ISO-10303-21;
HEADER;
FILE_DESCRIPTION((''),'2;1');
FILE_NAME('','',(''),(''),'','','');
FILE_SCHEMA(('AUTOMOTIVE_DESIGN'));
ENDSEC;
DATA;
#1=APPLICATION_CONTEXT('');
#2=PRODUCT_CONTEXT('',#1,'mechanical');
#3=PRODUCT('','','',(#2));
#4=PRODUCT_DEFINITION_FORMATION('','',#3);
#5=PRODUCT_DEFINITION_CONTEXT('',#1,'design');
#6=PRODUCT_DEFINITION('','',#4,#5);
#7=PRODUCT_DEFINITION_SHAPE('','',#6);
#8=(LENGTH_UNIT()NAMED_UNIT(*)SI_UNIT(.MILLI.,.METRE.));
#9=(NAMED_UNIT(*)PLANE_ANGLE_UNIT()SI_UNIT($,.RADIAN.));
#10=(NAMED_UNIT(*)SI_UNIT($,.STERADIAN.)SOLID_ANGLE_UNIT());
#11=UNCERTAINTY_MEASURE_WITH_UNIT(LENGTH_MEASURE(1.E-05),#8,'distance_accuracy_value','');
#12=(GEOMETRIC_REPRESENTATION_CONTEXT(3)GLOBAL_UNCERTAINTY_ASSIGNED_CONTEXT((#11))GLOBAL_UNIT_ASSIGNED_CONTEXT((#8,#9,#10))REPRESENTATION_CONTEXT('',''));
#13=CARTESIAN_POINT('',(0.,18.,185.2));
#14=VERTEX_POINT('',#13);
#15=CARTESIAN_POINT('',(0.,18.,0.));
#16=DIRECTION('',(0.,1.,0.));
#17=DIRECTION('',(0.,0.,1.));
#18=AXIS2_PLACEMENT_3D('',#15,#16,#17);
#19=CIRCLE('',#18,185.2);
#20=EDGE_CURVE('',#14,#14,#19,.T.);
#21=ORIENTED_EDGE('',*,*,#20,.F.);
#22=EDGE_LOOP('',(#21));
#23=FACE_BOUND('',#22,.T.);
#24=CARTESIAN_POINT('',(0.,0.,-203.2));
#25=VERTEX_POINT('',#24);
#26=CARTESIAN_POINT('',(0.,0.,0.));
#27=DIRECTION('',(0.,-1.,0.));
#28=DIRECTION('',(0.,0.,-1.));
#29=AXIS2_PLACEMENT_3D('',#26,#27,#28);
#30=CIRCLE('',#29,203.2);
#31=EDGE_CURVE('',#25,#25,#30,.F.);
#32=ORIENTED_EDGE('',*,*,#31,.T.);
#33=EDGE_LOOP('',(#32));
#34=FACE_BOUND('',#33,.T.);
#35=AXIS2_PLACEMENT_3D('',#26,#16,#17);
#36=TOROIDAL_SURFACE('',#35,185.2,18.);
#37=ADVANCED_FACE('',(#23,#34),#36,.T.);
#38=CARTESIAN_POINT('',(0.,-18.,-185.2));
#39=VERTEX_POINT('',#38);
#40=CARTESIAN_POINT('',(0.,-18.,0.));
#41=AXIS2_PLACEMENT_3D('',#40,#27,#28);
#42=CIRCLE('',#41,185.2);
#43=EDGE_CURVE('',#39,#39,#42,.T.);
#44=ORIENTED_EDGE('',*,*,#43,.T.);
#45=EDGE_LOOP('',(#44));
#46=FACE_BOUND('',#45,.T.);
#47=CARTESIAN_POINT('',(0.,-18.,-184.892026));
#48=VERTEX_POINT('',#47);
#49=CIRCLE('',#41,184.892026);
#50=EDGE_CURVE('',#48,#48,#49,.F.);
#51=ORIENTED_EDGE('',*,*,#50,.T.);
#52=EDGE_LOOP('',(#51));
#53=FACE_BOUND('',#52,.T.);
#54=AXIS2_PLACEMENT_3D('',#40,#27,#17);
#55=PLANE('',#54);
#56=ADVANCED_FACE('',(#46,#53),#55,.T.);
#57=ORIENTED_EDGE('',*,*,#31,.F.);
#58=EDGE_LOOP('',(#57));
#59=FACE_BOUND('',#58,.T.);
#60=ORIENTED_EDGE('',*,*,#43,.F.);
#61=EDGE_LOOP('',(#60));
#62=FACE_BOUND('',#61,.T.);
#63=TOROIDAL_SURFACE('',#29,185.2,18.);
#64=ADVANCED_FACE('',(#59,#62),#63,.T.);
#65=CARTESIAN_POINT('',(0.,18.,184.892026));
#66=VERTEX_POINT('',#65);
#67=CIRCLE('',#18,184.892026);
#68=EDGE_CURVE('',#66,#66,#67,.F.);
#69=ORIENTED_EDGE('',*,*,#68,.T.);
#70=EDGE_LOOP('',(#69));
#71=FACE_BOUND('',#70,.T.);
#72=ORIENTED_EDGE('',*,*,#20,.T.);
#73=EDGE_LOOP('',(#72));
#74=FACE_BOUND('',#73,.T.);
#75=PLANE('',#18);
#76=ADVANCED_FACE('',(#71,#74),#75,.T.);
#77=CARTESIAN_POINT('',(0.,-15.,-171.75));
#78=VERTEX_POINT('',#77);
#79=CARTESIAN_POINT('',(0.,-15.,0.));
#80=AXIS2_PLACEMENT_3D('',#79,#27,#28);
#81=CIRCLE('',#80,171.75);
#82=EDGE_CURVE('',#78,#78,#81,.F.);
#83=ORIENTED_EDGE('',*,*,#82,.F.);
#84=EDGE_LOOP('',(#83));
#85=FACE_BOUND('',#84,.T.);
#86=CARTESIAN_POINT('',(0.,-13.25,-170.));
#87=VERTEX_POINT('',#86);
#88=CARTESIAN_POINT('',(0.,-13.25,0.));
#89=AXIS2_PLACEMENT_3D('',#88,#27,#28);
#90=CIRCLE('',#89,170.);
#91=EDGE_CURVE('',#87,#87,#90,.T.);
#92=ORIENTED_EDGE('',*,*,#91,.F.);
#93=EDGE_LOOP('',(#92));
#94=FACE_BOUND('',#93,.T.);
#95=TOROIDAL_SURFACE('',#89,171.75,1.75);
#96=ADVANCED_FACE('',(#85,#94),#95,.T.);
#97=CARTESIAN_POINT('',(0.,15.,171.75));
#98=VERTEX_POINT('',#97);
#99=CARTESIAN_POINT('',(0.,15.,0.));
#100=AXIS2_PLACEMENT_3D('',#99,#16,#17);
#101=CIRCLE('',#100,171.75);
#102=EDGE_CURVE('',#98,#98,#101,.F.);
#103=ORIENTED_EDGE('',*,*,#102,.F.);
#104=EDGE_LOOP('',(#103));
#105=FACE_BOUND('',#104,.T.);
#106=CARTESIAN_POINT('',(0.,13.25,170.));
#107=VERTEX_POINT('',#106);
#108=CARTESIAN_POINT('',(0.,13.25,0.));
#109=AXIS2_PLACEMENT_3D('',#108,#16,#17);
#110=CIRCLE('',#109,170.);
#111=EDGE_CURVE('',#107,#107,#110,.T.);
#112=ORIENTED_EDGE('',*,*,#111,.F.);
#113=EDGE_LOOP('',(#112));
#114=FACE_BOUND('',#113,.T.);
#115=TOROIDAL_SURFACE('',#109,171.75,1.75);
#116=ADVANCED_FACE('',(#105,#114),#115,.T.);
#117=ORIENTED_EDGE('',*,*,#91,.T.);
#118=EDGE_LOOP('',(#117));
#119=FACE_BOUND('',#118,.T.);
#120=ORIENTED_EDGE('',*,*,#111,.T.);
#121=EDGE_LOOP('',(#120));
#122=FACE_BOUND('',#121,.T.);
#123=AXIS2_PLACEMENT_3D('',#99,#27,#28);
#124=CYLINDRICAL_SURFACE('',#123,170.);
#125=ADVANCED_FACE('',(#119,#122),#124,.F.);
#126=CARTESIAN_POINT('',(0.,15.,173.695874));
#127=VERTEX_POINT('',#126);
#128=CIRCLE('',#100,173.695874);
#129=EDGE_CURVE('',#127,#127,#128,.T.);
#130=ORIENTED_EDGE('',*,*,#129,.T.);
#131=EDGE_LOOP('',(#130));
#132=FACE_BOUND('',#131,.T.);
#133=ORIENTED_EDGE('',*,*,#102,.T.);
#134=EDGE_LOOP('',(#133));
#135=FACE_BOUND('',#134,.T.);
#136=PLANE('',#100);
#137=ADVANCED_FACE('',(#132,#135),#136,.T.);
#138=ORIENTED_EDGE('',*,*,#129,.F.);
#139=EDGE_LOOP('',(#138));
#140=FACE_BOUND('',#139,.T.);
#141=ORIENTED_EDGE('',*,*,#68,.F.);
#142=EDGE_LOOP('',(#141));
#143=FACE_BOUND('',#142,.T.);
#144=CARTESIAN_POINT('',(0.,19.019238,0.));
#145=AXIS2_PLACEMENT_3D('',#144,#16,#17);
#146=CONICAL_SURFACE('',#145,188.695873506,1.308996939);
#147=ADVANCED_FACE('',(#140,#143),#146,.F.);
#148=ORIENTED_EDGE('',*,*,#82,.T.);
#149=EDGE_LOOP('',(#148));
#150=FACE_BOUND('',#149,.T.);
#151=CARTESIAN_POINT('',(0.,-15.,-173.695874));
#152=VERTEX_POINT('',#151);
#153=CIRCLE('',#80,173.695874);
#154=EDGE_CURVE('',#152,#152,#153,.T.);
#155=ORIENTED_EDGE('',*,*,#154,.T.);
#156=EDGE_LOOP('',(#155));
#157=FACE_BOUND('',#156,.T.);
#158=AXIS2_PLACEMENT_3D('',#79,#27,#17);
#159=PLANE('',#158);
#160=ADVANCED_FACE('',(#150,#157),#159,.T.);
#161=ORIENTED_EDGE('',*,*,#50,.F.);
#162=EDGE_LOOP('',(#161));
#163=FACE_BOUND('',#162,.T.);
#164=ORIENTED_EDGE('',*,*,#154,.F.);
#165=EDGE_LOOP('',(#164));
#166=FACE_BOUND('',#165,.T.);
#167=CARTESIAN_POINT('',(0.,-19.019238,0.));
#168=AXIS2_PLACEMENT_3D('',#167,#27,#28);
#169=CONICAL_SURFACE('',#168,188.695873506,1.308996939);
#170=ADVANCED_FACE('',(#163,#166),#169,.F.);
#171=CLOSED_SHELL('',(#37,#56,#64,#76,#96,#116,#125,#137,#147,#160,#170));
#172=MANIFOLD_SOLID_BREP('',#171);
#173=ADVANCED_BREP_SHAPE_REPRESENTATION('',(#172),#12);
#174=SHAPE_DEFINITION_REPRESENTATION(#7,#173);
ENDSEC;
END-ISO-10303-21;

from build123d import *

# Parameters (mm, degrees)
SKETCH_1_R       = 188.695873506
SKETCH_1_R_2     = 170
EXTRUDE_4_DEPTH  = 15
SKETCH_1_8_R     = 203.2
SKETCH_1_8_R_2   = 188.695873506
EXTRUDE_5_DEPTH  = 18
CHAMFER_1_SIZE   = 15
CHAMFER_1_SIZE_2 = 4.019237886
FILLET_1_R       = 18
FILLET_2_R       = 1.75


# Some blends are built 0.0001 mm under size
with BuildPart() as part:
    # ｽｹｯﾁ1 → ﾎﾞｽ - 押し出し4 (new body)
    with BuildSketch(Plane(origin=(0, 0, 0), x_dir=(1, 0, 0), z_dir=(0, 1, 0))):
        with Locations(Location((0, 0, 0), (0, 0, 270))):
            Circle(SKETCH_1_R)
        with Locations(Location((0, 0, 0), (0, 0, 270))):
            Circle(SKETCH_1_R_2, mode=Mode.SUBTRACT)
    extrude_4 = extrude(amount=EXTRUDE_4_DEPTH)

    # ｽｹｯﾁ1<8> → ﾎﾞｽ - 押し出し5 (add)
    with BuildSketch(Plane(origin=(0, 0, 0), x_dir=(1, 0, 0), z_dir=(0, 1, 0))):
        with Locations(Location((0, 0, 0), (0, 0, 270))):
            Circle(SKETCH_1_8_R)
        with Locations(Location((0, 0, 0), (0, 0, 270))):
            Circle(SKETCH_1_8_R_2, mode=Mode.SUBTRACT)
    extrude_5 = extrude(amount=EXTRUDE_5_DEPTH)

    # ﾐﾗｰ1: ﾎﾞｽ - 押し出し4, ﾎﾞｽ - 押し出し5 across plane
    add(extrude_4.mirror(Plane.ZX))
    add(extrude_5.mirror(Plane.ZX))

    # 面取り1
    # the kernel refuses this chamfer: 15, 4.019237886 mm, written as the material it adds along each edge
    with BuildSketch(Plane(origin=(0, -15, 0), x_dir=(0, 0, 1), z_dir=(-1, 0, 0))) as chamfer_1_piece_1_section:
        Polygon((188.695873506 - CHAMFER_1_SIZE, 0), (188.695873506, -CHAMFER_1_SIZE_2), (188.695873506, 0), align=None)
    chamfer_1_piece_1 = revolve(axis=Axis((0, -15, 0), (0, 1, 0)), mode=Mode.PRIVATE)
    chamfer_1_piece_1 = split(chamfer_1_piece_1, bisect_by=Plane(origin=(0, -18, -179.092170597), z_dir=(0, 1, 0)), keep=Keep.TOP, mode=Mode.PRIVATE)
    add(chamfer_1_piece_1)
    with BuildSketch(Plane(origin=(0, 15, 0), x_dir=(0, 0, 1), z_dir=(-1, 0, 0))) as chamfer_1_piece_2_section:
        Polygon((188.695873506 - CHAMFER_1_SIZE, 0), (188.695873506, CHAMFER_1_SIZE_2), (188.695873506, 0), align=None)
    chamfer_1_piece_2 = revolve(axis=Axis((0, 15, 0), (0, 1, 0)), mode=Mode.PRIVATE)
    chamfer_1_piece_2 = split(chamfer_1_piece_2, bisect_by=Plane(origin=(0, 18, -179.092170597), z_dir=(0, -1, 0)), keep=Keep.TOP, mode=Mode.PRIVATE)
    add(chamfer_1_piece_2)

    # ﾌｨﾚｯﾄ1
    fillet_1_edges = [part.edges().sort_by_distance(p)[0] for p in [
        (0, -18, -203.2),
        (0, 18, -203.2),
    ]]
    fillet(fillet_1_edges, radius=FILLET_1_R - 0.0001)  # a hair under: the kernel refuses the full size

    # ﾌｨﾚｯﾄ2
    fillet_2_edges = [part.edges().sort_by_distance(p)[0] for p in [
        (0, -15, -170),
        (0, 15, -170),
    ]]
    fillet(fillet_2_edges, radius=FILLET_2_R)


solid = part.part
